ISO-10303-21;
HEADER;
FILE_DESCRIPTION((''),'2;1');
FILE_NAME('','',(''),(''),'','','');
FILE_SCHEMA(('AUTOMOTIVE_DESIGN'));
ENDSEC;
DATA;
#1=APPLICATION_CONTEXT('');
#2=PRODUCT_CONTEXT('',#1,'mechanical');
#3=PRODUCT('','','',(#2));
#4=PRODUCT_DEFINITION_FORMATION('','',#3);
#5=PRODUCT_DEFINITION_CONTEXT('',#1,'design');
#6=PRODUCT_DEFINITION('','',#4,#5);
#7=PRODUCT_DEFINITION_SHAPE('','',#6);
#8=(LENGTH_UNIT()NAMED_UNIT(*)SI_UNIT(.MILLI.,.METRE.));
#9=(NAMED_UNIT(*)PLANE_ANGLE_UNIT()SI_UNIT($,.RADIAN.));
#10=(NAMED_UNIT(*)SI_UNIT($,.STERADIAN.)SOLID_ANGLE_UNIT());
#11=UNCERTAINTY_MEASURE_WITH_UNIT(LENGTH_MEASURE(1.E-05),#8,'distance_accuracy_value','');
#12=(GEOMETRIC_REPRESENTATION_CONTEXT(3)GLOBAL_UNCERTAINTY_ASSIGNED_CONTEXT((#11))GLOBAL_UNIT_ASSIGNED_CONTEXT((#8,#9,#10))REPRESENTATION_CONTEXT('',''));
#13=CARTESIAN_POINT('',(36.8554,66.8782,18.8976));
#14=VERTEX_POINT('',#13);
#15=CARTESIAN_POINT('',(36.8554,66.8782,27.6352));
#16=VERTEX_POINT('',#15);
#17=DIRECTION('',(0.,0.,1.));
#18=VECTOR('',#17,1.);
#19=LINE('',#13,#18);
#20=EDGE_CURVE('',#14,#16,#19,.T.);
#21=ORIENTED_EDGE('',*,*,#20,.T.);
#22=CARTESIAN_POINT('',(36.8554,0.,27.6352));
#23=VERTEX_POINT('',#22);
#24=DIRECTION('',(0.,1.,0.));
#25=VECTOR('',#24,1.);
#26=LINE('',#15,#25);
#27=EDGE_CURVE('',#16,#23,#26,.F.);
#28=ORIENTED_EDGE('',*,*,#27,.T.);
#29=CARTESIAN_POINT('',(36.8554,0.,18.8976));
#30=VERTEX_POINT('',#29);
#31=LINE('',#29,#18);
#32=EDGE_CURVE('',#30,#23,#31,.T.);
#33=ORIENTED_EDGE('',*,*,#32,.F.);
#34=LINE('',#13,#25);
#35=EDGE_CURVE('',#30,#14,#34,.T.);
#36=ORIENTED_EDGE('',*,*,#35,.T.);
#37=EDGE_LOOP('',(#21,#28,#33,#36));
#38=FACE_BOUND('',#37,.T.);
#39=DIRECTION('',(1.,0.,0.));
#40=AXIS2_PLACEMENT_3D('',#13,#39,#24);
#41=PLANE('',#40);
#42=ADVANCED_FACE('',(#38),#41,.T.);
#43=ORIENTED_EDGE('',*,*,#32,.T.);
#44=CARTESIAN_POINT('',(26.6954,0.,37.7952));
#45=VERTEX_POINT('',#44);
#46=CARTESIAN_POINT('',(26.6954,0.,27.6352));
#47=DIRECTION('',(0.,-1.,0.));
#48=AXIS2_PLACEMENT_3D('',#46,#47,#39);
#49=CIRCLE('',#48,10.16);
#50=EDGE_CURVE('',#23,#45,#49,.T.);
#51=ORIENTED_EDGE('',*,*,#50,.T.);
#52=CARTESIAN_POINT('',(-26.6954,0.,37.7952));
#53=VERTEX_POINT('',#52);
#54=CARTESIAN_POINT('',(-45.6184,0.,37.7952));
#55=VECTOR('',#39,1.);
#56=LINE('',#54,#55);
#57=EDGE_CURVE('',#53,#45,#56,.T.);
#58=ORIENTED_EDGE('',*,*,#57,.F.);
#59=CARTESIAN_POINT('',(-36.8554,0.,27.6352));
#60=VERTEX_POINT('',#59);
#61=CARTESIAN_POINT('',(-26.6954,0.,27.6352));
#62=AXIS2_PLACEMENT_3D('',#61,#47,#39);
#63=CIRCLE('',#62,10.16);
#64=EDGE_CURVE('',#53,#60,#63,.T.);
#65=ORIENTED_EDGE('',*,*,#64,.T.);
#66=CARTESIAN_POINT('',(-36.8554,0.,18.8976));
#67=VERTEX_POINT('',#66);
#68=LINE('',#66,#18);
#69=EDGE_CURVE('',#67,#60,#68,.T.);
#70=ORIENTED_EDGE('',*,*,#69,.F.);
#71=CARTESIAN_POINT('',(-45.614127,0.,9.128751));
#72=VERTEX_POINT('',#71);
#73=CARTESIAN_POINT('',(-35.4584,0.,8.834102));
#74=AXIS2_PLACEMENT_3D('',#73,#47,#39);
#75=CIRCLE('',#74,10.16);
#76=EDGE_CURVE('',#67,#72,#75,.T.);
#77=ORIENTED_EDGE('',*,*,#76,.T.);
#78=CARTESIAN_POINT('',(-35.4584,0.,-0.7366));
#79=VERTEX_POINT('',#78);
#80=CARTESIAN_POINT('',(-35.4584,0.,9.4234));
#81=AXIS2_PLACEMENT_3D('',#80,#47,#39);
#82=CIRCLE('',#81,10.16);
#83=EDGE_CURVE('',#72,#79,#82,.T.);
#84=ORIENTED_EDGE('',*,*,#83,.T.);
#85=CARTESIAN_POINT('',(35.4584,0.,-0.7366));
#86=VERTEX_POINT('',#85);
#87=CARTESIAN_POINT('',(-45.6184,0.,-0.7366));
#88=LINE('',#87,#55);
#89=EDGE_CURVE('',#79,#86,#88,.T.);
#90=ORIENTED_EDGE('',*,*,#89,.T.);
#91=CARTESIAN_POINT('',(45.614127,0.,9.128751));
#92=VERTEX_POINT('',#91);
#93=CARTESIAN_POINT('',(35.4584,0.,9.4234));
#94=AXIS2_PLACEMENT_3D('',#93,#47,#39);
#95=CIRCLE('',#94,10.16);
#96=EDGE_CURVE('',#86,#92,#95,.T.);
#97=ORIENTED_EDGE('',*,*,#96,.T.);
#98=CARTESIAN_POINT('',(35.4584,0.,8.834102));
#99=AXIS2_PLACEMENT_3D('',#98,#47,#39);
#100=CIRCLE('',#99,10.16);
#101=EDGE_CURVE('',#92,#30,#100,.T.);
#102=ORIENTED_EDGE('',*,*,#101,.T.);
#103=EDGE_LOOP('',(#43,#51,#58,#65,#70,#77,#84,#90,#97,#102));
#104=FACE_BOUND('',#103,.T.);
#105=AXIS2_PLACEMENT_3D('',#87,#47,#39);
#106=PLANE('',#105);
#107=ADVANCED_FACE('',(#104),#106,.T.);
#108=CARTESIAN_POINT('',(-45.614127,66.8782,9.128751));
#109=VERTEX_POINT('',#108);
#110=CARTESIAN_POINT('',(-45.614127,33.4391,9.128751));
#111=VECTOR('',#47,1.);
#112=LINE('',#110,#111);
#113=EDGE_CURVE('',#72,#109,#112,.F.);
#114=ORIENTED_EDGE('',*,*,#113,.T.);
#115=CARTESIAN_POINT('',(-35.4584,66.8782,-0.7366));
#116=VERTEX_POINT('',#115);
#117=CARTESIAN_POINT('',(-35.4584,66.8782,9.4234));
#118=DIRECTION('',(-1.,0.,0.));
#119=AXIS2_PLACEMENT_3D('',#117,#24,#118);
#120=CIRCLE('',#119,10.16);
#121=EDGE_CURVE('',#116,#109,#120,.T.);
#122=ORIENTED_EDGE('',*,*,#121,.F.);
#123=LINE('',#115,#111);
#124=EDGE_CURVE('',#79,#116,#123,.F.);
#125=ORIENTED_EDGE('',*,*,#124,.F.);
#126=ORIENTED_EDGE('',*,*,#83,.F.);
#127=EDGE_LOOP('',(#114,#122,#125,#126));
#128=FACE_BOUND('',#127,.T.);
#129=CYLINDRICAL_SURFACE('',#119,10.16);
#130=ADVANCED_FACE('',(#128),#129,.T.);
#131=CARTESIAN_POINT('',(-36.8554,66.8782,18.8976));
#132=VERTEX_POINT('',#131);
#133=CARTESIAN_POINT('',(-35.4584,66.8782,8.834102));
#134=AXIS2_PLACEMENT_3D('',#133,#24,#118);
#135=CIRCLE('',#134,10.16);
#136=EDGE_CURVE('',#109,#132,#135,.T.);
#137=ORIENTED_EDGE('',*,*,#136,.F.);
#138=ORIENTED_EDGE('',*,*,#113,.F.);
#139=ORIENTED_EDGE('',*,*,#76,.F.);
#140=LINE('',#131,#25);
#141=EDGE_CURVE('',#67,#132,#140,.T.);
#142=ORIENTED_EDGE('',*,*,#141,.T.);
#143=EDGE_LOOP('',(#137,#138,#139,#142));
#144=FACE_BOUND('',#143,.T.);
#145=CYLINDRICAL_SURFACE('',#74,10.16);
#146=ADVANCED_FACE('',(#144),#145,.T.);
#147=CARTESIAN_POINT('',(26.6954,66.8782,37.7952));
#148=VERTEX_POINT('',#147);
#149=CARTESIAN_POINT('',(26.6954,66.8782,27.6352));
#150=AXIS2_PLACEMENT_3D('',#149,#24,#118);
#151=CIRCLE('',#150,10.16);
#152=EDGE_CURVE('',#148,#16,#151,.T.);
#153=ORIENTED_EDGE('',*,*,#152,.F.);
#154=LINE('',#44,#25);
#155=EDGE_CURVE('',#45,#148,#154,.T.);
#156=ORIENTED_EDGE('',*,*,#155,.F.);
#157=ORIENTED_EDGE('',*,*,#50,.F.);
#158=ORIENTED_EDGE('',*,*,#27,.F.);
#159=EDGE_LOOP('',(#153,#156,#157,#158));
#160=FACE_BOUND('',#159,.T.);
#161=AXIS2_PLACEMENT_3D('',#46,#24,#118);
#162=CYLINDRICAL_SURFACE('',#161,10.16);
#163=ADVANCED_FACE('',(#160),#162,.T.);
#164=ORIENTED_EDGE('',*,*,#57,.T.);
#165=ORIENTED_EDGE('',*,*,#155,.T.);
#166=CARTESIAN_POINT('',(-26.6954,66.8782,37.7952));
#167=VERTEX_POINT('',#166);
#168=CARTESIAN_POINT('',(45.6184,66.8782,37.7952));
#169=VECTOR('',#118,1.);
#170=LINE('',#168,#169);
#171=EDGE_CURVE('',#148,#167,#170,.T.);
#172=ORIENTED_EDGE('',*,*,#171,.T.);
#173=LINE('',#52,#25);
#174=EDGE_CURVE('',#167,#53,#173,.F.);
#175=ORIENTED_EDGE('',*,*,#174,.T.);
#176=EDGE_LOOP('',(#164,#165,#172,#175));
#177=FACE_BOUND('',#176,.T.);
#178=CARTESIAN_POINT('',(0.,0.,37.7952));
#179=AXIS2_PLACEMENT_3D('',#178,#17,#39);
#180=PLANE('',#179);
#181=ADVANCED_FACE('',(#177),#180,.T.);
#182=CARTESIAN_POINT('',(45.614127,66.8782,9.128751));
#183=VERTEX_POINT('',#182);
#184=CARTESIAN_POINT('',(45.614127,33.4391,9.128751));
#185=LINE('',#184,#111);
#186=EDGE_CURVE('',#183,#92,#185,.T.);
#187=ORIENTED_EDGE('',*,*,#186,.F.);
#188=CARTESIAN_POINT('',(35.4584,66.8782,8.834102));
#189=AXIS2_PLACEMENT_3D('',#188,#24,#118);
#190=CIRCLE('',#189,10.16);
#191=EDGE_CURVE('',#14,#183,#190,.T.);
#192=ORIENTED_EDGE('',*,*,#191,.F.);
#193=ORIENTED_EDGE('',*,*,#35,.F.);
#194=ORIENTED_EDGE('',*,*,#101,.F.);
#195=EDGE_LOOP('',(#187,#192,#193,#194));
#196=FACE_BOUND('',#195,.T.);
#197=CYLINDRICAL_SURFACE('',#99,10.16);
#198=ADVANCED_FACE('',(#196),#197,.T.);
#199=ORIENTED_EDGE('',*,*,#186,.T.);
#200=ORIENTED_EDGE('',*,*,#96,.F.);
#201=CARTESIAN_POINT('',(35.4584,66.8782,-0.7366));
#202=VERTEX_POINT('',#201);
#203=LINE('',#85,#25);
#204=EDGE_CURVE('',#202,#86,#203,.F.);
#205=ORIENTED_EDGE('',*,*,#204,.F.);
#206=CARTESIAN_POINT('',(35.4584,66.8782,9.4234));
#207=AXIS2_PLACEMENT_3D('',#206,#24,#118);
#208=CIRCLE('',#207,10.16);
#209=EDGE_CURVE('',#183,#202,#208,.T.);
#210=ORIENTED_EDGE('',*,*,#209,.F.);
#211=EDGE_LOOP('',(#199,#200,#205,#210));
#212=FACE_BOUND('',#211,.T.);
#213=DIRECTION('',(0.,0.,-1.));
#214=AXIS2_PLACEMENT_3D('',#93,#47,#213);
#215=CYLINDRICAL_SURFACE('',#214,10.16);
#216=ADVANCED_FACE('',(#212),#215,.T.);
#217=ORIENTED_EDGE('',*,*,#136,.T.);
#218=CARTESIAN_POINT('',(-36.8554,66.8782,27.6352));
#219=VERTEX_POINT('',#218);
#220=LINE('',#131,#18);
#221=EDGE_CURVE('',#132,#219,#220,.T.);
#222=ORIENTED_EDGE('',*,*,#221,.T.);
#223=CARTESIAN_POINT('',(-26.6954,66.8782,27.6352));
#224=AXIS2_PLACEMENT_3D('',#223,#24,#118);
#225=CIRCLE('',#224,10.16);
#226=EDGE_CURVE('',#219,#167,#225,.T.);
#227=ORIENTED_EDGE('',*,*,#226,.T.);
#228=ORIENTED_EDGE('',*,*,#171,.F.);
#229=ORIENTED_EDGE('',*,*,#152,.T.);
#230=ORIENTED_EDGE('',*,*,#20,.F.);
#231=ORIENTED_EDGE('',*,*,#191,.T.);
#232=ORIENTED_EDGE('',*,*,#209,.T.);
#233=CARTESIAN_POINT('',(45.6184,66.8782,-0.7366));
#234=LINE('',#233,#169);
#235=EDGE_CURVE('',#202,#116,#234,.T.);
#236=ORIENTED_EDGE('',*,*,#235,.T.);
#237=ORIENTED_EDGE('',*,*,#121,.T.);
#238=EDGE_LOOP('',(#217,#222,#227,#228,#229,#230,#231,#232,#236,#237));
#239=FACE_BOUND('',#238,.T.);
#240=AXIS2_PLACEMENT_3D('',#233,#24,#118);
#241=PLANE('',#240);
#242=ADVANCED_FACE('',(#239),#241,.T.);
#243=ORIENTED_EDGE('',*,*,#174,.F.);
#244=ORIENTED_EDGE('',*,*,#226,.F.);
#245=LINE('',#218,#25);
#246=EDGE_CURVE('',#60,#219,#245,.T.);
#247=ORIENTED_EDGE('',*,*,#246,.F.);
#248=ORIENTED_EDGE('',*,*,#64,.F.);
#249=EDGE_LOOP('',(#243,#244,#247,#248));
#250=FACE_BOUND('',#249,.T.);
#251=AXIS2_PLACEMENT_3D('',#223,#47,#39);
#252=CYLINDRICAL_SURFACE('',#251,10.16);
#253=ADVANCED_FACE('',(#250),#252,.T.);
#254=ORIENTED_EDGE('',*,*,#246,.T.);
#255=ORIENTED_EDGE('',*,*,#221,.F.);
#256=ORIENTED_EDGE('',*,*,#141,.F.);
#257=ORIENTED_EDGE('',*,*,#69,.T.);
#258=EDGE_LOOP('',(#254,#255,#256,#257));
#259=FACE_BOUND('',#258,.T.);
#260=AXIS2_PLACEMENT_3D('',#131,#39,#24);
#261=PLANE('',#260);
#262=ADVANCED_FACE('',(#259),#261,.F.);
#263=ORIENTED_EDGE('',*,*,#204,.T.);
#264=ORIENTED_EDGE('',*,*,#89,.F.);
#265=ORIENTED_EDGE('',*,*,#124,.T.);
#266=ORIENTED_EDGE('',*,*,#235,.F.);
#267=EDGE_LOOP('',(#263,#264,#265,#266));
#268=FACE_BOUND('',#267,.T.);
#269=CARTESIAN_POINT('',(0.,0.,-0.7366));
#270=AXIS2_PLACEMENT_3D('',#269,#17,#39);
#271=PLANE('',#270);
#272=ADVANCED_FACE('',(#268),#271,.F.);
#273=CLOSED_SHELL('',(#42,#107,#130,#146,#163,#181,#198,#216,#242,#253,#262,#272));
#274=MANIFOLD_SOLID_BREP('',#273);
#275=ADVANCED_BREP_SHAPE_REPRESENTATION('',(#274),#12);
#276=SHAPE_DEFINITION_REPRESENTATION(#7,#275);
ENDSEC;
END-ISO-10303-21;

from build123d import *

# Parameters (mm, degrees)
SKETCH1_W           = 91.2368
SKETCH1_H           = 66.8782
BASE_FLANGE1_DEPTH  = 0.7366
SKETCH6_W           = 91.2368
SKETCH6_H           = 66.8782
BOSS_EXTRUDE1_DEPTH = 37.7952
SKETCH8_W           = 8.763
SKETCH8_H           = 66.8782
CUT_EXTRUDE2_DEPTH  = 18.8976
FILLET1_R           = 10.16


# Sheet-metal steps are written as plain solids
with BuildPart() as part:
    # Sketch1 → Base-Flange1 (new body)
    with BuildSketch(Plane.XY):
        with Locations((0, 33.4391)):
            Rectangle(SKETCH1_W, SKETCH1_H)
    extrude(amount=-BASE_FLANGE1_DEPTH)

    # Sketch6 → Boss-Extrude1 (add)
    with BuildSketch(Plane.XY):
        with Locations((0, 33.4391)):
            Rectangle(SKETCH6_W, SKETCH6_H)
    extrude(amount=BOSS_EXTRUDE1_DEPTH)

    # Sketch8 → Cut-Extrude2 (cut)
    with BuildSketch(Plane.XY.offset(37.7952)):
        with Locations((-41.2369, 33.4391)):
            Rectangle(SKETCH8_W, SKETCH8_H)
    cut_extrude2 = extrude(amount=-CUT_EXTRUDE2_DEPTH, mode=Mode.SUBTRACT)

    # Mirror1: Cut-Extrude2 across plane
    add(cut_extrude2.mirror(Plane(origin=(0, 0, 0), x_dir=(0, 0, 1), z_dir=(1, 0, 0))), mode=Mode.SUBTRACT)

    # Fillet1
    # the kernel refuses this fillet: 10.16 mm, written as the material it takes off along each edge
    with BuildSketch(Plane(origin=(-45.6184, -25.158744876, 18.8976), x_dir=(1, 0, 0), z_dir=(0, 1, 0))) as fillet1_piece_1:
        with BuildLine():
            CenterArc((10.16, 10.063497951), FILLET1_R, 180, 82.096792267)
            Line((0, 10.063497951), (-0.2032, 10.063497951))
            Line((-0.2032, 10.063497951), (-0.2032, 0))
            Line((-0.2032, 0), (0, -0.2032))
            ThreePointArc((0, -0.2032), (4.3815, -0.2032), (8.73506, -0.201269959))
            Line((8.73506, -0.201269959), (8.763, 0))
        make_face()
    extrude(amount=117.195689753, mode=Mode.SUBTRACT)
    with BuildSketch(Plane(origin=(45.6184, -25.158744876, 18.8976), x_dir=(-1, 0, 0), z_dir=(0, 1, 0))) as fillet1_piece_2:
        with BuildLine():
            CenterArc((10.16, -10.063497951), FILLET1_R, 97.903207733, 82.096792267)
            Line((0, -10.063497951), (-0.2032, -10.063497951))
            Line((-0.2032, -10.063497951), (-0.2032, 0))
            Line((-0.2032, 0), (0, 0.2032))
            ThreePointArc((0, 0.2032), (4.3815, 0.2032), (8.73506, 0.201269959))
            Line((8.73506, 0.201269959), (8.763, 0))
        make_face()
    extrude(amount=117.195689753, mode=Mode.SUBTRACT)
    with BuildSketch(Plane(origin=(36.8554, 92.2782, 37.7952), x_dir=(-1, 0, 0), z_dir=(0, -1, 0)), Plane(origin=(-36.8554, 92.2782, 37.7952), x_dir=(0, 0, -1), z_dir=(0, -1, 0)), Plane(origin=(-45.6184, 92.2782, -0.7366), x_dir=(1, 0, 0), z_dir=(0, -1, 0))) as fillet1_piece_3:
        with BuildLine():
            CenterArc((FILLET1_R, FILLET1_R), FILLET1_R, 180, 90)
            Line((0, FILLET1_R), (-FILLET1_R * 0.02, FILLET1_R))
            Line((-FILLET1_R * 0.02, FILLET1_R), (-FILLET1_R * 0.02, -FILLET1_R * 0.02))
            Line((-FILLET1_R * 0.02, -FILLET1_R * 0.02), (FILLET1_R, -FILLET1_R * 0.02))
            Line((FILLET1_R, -FILLET1_R * 0.02), (FILLET1_R, 0))
        make_face()
    extrude(amount=117.6782, mode=Mode.SUBTRACT)
    with BuildSketch(Plane(origin=(45.6184, -25.4, -0.7366), x_dir=(0, 0, 1), z_dir=(0, 1, 0))) as fillet1_piece_4:
        with BuildLine():
            CenterArc((FILLET1_R, -FILLET1_R), FILLET1_R, 90, 90)
            Line((0, -FILLET1_R), (-FILLET1_R * 0.02, -FILLET1_R))
            Line((-FILLET1_R * 0.02, -FILLET1_R), (-FILLET1_R * 0.02, FILLET1_R * 0.02))
            Line((-FILLET1_R * 0.02, FILLET1_R * 0.02), (FILLET1_R, FILLET1_R * 0.02))
            Line((FILLET1_R, FILLET1_R * 0.02), (FILLET1_R, 0))
        make_face()
    extrude(amount=117.6782, mode=Mode.SUBTRACT)


solid = part.part
